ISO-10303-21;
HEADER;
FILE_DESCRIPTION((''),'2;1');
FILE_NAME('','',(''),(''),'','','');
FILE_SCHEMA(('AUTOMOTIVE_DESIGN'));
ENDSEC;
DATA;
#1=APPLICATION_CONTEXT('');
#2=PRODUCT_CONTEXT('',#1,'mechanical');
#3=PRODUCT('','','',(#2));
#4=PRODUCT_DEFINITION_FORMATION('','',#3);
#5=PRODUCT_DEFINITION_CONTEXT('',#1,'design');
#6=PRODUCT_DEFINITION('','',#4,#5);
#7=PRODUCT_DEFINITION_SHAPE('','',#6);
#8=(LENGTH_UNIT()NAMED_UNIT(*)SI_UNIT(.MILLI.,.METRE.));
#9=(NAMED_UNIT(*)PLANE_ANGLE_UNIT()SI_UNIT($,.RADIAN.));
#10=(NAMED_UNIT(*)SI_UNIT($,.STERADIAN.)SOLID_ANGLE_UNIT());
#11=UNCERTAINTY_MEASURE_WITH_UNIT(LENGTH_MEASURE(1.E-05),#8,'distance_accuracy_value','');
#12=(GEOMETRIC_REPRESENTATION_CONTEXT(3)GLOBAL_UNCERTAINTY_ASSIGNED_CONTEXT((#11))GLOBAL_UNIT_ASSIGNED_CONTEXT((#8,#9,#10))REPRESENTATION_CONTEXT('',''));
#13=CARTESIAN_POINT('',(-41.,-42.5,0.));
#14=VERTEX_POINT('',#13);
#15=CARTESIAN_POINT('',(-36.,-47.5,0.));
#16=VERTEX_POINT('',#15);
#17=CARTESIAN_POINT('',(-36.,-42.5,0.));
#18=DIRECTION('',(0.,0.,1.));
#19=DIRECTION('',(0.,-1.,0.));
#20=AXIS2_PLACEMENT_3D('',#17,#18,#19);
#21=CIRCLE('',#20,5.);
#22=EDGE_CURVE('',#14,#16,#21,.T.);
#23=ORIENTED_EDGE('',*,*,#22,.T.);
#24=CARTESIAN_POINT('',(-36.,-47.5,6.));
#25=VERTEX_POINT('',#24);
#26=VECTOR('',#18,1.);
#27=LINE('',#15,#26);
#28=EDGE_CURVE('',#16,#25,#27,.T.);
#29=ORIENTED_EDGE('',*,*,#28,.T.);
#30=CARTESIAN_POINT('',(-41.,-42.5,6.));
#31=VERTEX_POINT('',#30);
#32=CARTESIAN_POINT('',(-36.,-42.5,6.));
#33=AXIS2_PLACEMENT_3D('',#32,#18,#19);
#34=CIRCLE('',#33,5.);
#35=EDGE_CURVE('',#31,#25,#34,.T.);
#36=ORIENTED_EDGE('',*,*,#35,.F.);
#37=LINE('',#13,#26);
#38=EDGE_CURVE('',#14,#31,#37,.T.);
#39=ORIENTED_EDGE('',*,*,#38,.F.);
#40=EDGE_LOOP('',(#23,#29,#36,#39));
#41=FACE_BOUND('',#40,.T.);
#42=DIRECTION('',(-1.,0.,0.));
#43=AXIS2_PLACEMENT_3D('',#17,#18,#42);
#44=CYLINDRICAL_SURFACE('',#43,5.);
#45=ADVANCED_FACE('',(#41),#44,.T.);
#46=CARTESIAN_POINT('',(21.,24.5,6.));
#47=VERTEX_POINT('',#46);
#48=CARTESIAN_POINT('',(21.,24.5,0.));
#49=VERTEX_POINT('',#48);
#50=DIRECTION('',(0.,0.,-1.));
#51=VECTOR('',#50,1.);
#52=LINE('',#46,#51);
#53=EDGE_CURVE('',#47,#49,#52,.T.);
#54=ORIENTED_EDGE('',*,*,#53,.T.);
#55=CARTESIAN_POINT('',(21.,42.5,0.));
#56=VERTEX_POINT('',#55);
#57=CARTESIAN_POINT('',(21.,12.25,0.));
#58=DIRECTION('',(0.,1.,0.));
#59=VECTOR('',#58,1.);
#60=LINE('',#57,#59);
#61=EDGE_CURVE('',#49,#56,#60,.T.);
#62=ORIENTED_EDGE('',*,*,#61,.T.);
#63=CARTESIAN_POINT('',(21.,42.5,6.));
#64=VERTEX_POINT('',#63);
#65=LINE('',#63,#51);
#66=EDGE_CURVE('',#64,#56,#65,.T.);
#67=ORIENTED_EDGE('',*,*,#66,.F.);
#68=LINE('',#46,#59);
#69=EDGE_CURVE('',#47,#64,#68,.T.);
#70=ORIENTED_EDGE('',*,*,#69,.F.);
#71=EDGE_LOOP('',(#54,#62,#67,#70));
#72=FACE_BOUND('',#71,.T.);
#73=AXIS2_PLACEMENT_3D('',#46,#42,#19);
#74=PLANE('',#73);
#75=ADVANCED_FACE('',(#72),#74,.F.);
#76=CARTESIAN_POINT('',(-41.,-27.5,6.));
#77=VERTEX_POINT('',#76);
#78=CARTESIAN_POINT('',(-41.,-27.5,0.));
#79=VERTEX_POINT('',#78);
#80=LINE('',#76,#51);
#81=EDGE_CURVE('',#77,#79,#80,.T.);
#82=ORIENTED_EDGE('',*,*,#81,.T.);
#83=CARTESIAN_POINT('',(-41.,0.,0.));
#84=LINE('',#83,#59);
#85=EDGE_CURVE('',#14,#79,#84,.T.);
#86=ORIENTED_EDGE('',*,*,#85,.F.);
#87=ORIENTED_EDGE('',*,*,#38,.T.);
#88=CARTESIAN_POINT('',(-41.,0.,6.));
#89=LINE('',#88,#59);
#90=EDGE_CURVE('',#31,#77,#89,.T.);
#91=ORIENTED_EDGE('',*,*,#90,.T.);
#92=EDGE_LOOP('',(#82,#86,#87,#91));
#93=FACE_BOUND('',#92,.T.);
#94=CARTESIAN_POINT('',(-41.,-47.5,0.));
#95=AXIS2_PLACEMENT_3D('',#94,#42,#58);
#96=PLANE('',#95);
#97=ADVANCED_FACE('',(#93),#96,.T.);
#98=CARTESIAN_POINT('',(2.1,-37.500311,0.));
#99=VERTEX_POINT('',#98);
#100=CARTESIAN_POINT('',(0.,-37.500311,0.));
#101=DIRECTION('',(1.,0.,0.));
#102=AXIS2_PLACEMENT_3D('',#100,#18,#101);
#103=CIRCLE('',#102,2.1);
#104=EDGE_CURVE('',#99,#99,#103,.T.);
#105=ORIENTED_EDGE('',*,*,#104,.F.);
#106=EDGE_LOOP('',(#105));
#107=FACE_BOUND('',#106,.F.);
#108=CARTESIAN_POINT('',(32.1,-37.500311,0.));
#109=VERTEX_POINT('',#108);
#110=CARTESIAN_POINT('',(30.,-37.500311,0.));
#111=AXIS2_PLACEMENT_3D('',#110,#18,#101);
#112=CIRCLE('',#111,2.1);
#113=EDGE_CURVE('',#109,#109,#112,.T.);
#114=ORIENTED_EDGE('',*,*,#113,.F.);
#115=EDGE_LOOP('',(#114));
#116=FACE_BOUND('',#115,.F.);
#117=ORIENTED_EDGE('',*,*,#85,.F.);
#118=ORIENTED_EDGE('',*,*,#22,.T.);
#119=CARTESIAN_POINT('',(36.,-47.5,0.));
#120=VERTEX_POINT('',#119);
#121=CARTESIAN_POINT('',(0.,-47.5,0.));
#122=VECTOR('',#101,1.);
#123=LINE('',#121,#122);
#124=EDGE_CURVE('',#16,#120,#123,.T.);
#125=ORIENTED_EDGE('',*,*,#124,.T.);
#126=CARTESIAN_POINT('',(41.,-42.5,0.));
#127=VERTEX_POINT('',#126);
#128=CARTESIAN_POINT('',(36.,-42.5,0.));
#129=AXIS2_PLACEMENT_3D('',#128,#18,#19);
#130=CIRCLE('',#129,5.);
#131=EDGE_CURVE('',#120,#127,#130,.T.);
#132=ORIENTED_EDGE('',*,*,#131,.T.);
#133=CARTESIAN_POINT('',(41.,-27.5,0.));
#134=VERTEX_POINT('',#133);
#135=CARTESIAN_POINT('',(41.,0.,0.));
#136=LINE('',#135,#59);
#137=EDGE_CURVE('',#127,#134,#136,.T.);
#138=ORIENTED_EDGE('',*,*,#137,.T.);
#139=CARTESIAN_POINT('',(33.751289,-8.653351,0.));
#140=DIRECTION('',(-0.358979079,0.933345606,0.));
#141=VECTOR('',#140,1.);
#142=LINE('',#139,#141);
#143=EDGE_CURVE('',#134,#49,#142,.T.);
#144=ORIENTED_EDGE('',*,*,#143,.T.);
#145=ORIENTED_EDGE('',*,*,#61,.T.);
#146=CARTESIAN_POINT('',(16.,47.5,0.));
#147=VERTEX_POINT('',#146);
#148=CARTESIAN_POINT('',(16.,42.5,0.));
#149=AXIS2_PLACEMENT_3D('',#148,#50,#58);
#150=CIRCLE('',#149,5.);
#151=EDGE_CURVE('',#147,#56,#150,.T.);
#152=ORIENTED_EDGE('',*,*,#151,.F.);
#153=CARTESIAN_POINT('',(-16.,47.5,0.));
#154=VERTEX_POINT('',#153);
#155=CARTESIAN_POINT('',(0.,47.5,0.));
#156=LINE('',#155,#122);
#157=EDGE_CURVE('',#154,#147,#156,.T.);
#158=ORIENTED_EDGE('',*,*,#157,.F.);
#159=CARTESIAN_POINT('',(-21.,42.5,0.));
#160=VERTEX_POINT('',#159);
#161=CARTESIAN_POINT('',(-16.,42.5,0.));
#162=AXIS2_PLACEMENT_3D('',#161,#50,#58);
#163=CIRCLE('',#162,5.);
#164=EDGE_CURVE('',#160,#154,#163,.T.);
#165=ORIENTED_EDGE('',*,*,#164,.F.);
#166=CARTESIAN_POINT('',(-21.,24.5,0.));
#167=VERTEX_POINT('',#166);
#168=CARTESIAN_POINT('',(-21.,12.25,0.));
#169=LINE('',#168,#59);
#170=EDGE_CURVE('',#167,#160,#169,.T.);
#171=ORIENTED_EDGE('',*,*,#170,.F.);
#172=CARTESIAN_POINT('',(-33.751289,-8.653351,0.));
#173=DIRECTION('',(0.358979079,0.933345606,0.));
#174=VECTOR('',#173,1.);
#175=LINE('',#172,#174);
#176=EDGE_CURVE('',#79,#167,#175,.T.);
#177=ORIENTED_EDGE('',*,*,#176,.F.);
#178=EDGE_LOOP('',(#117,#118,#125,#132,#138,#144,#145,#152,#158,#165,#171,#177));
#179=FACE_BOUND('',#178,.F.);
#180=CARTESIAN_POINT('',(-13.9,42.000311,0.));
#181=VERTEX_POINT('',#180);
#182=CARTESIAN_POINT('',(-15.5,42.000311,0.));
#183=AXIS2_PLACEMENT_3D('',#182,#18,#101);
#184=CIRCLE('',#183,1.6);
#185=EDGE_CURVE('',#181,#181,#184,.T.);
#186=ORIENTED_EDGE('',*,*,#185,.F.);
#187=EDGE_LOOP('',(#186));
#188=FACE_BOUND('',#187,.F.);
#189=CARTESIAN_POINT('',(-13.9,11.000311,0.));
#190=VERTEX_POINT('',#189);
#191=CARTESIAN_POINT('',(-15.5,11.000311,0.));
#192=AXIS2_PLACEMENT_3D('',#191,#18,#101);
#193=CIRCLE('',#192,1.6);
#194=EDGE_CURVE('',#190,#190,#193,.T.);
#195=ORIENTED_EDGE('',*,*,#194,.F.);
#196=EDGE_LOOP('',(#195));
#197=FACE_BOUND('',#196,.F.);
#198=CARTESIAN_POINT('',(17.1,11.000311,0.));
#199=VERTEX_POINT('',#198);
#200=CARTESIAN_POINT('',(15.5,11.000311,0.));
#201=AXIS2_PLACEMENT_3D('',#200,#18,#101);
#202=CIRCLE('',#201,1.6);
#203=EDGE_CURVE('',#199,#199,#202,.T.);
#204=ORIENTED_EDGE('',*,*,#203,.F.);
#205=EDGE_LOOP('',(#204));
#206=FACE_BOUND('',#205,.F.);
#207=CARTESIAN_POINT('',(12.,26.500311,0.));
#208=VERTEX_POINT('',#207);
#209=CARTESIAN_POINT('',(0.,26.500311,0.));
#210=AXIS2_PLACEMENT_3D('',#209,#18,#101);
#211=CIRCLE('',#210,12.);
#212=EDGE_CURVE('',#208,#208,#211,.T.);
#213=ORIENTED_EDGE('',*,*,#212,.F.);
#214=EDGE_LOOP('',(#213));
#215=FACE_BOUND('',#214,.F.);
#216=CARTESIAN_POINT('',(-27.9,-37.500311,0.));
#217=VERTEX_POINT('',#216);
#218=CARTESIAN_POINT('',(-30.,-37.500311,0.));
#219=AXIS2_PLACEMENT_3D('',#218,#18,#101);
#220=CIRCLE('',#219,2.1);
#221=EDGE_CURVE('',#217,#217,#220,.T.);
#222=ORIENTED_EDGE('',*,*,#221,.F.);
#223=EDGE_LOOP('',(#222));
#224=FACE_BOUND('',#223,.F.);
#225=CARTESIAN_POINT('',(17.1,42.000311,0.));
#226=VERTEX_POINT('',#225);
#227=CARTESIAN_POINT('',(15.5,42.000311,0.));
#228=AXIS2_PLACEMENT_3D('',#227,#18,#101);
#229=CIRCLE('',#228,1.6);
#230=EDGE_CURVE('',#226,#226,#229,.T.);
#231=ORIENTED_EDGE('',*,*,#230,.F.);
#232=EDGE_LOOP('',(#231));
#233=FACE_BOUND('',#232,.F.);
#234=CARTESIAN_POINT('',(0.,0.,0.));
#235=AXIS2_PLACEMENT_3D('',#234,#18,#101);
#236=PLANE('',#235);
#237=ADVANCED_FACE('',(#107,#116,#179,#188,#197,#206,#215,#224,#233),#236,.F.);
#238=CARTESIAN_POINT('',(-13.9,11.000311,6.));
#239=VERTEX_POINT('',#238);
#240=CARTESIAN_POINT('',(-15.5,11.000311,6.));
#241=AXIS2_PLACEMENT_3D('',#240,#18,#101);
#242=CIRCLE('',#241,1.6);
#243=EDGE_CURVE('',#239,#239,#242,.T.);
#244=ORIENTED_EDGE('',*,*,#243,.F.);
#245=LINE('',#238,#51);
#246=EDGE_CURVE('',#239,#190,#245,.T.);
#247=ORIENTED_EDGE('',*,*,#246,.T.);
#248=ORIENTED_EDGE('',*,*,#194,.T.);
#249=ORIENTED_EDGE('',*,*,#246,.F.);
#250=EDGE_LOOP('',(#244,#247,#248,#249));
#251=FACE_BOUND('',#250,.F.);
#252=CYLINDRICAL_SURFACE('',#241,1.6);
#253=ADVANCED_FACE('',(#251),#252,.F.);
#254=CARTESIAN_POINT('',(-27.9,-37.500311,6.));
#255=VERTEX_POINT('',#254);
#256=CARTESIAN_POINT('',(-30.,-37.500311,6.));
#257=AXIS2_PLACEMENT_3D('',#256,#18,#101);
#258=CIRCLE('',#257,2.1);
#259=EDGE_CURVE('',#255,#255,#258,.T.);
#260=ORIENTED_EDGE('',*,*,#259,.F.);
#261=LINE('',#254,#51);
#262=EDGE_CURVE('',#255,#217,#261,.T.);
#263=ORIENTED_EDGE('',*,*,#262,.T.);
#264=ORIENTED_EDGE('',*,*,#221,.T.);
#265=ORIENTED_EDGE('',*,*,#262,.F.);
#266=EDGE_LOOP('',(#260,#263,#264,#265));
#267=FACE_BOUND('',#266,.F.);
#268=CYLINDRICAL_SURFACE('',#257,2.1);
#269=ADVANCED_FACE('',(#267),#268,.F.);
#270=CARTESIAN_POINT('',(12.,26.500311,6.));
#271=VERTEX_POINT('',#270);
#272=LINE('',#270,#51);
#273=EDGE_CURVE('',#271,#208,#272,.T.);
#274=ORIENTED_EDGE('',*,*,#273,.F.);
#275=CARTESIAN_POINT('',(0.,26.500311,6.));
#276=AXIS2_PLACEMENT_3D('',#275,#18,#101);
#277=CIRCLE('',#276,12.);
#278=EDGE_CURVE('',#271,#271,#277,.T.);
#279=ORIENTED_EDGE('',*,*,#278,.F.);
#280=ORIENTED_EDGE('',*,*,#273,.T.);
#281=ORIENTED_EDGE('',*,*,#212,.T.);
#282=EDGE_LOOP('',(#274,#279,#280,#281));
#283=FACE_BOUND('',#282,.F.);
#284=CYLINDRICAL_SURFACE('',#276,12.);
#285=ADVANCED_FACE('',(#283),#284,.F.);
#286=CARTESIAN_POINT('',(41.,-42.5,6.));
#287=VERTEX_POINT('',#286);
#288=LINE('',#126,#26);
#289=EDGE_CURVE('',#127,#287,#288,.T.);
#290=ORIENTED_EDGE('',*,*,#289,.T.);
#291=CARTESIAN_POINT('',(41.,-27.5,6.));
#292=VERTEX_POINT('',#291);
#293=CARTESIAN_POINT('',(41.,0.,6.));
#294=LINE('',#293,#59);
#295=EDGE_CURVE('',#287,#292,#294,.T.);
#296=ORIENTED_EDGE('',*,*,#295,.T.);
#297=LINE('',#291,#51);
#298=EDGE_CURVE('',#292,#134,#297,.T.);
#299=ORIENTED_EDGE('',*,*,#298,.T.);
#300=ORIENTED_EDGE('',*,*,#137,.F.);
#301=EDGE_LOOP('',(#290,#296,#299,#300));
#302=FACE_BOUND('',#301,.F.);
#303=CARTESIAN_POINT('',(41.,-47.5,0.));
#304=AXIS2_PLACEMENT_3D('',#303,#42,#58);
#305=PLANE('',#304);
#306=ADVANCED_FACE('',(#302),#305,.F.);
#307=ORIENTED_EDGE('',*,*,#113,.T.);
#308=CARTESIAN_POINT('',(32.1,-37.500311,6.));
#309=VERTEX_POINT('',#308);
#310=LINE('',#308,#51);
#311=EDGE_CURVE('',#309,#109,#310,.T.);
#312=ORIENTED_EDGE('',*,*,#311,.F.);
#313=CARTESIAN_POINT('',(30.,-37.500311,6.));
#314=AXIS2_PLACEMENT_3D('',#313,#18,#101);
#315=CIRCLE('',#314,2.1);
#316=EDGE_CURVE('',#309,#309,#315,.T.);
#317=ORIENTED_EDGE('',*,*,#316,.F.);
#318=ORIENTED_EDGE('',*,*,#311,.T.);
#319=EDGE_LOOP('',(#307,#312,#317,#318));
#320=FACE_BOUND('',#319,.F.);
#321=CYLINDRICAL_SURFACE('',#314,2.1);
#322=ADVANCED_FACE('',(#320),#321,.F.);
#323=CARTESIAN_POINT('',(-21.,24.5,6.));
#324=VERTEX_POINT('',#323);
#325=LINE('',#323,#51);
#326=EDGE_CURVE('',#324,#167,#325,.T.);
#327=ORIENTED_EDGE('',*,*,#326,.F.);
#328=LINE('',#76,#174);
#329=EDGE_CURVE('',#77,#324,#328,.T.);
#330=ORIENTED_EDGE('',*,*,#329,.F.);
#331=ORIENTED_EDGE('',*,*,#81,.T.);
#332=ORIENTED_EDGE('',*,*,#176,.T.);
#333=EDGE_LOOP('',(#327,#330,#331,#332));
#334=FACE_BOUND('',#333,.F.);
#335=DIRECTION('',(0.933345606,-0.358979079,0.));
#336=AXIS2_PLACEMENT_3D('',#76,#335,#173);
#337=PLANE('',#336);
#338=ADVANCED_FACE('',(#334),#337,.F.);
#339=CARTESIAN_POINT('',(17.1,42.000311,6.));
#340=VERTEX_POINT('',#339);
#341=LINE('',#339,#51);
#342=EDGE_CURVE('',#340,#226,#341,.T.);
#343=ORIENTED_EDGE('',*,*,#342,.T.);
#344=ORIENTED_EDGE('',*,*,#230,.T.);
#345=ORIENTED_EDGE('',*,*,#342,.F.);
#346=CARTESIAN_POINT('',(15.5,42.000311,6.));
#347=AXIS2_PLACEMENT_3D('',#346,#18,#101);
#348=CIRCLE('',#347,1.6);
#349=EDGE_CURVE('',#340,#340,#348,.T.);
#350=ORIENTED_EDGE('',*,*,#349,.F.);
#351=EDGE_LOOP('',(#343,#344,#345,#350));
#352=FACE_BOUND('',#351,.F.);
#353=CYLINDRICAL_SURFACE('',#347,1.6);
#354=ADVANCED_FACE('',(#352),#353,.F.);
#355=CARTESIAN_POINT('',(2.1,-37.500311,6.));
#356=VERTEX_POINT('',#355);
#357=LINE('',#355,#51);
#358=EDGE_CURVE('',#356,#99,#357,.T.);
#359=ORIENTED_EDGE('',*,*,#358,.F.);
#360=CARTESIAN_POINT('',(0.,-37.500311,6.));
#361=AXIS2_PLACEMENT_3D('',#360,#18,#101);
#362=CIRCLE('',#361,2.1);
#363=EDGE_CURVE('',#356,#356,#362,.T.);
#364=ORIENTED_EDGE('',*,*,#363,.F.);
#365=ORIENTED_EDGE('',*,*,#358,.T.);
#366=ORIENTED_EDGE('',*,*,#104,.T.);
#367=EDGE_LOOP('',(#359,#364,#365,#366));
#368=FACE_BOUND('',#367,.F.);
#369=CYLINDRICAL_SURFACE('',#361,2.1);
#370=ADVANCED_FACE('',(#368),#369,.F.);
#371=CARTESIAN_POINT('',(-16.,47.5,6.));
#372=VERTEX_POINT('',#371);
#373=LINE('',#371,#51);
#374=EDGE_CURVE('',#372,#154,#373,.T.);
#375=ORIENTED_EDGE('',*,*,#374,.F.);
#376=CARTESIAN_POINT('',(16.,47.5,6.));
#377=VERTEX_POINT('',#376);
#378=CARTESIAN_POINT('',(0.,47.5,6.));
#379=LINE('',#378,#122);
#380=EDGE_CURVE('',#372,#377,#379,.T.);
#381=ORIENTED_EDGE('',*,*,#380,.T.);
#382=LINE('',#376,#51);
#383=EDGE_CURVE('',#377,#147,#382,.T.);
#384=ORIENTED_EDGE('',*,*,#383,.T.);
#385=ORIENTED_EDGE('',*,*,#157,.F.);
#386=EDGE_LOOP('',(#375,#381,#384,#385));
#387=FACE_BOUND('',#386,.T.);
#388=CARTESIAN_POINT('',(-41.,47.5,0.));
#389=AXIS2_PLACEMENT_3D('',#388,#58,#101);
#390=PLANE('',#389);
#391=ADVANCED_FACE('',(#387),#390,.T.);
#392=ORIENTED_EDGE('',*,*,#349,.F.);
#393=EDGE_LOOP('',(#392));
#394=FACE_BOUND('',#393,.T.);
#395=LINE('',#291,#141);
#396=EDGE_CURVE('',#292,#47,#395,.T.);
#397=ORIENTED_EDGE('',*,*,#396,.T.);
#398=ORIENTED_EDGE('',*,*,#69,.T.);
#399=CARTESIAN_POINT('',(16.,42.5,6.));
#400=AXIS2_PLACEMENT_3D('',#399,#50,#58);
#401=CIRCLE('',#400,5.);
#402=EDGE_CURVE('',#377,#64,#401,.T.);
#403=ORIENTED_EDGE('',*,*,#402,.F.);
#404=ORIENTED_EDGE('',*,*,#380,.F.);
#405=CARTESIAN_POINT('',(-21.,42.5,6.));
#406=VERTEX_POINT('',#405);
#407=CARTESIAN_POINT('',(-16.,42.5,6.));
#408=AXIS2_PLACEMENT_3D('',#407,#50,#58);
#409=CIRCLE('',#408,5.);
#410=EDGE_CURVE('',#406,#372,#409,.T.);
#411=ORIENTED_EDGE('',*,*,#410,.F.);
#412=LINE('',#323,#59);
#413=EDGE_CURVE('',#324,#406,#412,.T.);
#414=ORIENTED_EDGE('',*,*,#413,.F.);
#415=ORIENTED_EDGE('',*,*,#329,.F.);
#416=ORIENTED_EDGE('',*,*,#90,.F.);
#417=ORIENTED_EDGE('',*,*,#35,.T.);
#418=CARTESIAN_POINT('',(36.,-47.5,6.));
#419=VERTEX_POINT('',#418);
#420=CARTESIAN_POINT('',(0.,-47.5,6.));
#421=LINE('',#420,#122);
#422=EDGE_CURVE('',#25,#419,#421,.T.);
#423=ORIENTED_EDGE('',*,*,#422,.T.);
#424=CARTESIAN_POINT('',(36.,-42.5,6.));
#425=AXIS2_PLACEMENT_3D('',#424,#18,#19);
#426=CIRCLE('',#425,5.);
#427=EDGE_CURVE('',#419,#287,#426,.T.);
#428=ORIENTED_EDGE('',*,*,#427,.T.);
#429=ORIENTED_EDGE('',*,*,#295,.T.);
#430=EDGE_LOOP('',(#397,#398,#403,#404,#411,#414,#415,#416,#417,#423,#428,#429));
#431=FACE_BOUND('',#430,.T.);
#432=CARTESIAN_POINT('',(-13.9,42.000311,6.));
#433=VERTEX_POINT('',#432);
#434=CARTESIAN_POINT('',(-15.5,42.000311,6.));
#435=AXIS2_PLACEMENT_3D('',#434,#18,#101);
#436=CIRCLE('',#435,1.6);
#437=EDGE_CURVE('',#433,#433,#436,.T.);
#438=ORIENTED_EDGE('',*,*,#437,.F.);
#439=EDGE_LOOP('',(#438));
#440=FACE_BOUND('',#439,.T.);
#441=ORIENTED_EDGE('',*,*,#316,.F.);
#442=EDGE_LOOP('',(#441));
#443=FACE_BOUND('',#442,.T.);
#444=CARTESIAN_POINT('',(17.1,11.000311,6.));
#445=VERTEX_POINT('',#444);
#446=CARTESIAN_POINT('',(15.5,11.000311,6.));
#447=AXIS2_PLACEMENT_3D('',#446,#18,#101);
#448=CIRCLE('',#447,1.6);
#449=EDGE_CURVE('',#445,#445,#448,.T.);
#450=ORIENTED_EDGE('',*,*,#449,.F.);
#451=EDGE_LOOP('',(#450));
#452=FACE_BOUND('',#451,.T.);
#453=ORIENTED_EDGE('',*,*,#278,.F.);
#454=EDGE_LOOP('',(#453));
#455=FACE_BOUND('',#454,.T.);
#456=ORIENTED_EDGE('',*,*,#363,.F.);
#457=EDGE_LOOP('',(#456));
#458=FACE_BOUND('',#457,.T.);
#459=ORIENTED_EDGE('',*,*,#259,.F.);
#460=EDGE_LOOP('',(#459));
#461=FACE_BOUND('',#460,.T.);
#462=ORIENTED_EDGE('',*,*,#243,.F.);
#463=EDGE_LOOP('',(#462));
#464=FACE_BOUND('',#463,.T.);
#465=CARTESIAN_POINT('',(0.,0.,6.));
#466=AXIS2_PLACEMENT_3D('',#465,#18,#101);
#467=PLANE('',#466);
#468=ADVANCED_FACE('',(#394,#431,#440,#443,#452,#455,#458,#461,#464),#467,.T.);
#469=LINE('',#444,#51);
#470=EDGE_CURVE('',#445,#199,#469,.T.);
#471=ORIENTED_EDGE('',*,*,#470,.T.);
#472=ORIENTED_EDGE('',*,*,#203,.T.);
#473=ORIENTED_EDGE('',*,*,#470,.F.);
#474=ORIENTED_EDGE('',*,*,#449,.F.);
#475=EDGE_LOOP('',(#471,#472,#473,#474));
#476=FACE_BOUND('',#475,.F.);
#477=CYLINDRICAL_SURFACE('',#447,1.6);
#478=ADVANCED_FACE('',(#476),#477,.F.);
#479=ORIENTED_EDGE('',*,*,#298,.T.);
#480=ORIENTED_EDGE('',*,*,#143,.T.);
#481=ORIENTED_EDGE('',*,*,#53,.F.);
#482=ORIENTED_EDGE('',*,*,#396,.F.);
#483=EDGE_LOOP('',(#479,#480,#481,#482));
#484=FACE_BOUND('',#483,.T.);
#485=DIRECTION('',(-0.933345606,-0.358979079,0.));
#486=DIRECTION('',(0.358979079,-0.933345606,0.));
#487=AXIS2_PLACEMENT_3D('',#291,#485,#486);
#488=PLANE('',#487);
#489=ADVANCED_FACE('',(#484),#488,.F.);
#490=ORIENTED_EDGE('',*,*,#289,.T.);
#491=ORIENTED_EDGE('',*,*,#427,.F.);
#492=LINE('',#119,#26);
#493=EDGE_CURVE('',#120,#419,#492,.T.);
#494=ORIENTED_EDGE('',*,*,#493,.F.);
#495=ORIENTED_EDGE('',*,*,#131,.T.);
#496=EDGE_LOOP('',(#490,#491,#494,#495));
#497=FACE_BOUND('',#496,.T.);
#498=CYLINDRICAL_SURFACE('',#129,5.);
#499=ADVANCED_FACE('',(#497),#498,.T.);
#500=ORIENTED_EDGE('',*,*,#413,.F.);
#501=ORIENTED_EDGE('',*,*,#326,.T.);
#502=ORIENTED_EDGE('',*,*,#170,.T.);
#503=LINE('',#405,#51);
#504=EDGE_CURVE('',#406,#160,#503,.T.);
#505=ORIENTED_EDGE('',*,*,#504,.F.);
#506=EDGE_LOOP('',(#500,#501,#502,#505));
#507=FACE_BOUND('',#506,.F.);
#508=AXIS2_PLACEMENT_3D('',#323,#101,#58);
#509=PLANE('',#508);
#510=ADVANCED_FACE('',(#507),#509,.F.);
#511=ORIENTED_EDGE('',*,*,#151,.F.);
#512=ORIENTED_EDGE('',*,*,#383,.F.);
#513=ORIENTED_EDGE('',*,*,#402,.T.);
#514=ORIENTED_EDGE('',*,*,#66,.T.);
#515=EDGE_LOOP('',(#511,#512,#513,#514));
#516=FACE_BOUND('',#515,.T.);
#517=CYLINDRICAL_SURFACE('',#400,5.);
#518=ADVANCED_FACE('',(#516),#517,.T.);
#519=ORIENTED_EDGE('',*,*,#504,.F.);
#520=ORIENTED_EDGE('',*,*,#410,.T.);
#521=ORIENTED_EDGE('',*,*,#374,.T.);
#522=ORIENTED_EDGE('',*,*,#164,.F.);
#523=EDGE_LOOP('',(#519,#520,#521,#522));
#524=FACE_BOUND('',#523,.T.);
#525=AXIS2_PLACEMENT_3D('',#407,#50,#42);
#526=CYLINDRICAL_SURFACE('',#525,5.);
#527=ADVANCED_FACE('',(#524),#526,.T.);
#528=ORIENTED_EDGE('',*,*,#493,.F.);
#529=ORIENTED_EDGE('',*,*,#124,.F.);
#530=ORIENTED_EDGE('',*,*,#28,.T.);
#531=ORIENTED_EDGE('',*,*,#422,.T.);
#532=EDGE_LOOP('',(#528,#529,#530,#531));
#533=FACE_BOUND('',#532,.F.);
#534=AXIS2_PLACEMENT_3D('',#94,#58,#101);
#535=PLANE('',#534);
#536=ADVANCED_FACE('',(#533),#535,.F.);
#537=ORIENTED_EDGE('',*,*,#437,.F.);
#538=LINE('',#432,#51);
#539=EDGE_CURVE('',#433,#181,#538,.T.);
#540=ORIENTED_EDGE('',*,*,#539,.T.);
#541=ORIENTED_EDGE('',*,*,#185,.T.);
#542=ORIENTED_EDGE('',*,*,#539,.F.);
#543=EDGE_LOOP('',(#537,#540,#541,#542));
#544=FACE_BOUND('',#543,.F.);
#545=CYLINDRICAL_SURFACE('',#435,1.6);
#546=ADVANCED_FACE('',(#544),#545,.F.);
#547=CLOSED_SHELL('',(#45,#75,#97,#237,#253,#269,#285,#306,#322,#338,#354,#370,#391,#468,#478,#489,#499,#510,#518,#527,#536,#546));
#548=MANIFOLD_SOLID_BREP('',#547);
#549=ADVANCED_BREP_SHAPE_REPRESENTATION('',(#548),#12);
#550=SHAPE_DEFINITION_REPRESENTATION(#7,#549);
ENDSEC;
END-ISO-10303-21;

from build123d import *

# Parameters (mm, degrees)
F0_W     = 82
F0_H     = 95
F1_DEPTH = 6
F3_DEPTH = 6.001
F4_R     = 12
F4_R_2   = 1.6
F4_R_3   = 2.1
F5_DEPTH = 6.001
F6_R     = 5


# Not quite as in the source:
# - a pattern or mirror of a feature is missing from the dataset's text; its kind, count and spacing are read off the source's solid


with BuildPart() as f1:
    # F0 (on Top) → F1 (new body)
    with BuildSketch(Plane.XY):
        Rectangle(F0_W, F0_H)
    extrude(amount=F1_DEPTH)

    # F2 (on face) → F3 (cut, through all)
    with BuildSketch(Plane.XY.offset(6)):
        Polygon((-41, -27.5), (-21, 24.5), (-21, 47.5), (-41, 47.5), align=None)
    f3 = extrude(amount=-F3_DEPTH, mode=Mode.SUBTRACT)

    # F3_copies: F3 across plane
    add(f3.mirror(Plane(origin=(0, 0, 0), x_dir=(0, 0, 1), z_dir=(1, 0, 0))), mode=Mode.SUBTRACT)

    # F4 (on face) → F5 (cut, through all)
    with BuildSketch(Plane.XY.offset(6)):
        with Locations((0, 26.5003114)):
            Circle(F4_R)
        with Locations((15.5, 42.0003114)):
            Circle(F4_R_2)
        with Locations((-15.5, 42.0003114)):
            Circle(F4_R_2)
        with Locations((15.5, 11.0003114)):
            Circle(F4_R_2)
        with Locations((-15.5, 11.0003114)):
            Circle(F4_R_2)
        with Locations((-30, -37.5003114)):
            Circle(F4_R_3)
        with Locations((0, -37.5003114)):
            Circle(F4_R_3)
        with Locations((30, -37.5003114)):
            Circle(F4_R_3)
    extrude(amount=-F5_DEPTH, mode=Mode.SUBTRACT)

    # F6
    f6_edges = [f1.edges().sort_by_distance(p)[0] for p in [
        (-41, -47.5, 3),
        (41, -47.5, 3),
        (-21, 47.5, 3),
        (21, 47.5, 3),
    ]]
    fillet(f6_edges, radius=F6_R)


solid = f1.part
